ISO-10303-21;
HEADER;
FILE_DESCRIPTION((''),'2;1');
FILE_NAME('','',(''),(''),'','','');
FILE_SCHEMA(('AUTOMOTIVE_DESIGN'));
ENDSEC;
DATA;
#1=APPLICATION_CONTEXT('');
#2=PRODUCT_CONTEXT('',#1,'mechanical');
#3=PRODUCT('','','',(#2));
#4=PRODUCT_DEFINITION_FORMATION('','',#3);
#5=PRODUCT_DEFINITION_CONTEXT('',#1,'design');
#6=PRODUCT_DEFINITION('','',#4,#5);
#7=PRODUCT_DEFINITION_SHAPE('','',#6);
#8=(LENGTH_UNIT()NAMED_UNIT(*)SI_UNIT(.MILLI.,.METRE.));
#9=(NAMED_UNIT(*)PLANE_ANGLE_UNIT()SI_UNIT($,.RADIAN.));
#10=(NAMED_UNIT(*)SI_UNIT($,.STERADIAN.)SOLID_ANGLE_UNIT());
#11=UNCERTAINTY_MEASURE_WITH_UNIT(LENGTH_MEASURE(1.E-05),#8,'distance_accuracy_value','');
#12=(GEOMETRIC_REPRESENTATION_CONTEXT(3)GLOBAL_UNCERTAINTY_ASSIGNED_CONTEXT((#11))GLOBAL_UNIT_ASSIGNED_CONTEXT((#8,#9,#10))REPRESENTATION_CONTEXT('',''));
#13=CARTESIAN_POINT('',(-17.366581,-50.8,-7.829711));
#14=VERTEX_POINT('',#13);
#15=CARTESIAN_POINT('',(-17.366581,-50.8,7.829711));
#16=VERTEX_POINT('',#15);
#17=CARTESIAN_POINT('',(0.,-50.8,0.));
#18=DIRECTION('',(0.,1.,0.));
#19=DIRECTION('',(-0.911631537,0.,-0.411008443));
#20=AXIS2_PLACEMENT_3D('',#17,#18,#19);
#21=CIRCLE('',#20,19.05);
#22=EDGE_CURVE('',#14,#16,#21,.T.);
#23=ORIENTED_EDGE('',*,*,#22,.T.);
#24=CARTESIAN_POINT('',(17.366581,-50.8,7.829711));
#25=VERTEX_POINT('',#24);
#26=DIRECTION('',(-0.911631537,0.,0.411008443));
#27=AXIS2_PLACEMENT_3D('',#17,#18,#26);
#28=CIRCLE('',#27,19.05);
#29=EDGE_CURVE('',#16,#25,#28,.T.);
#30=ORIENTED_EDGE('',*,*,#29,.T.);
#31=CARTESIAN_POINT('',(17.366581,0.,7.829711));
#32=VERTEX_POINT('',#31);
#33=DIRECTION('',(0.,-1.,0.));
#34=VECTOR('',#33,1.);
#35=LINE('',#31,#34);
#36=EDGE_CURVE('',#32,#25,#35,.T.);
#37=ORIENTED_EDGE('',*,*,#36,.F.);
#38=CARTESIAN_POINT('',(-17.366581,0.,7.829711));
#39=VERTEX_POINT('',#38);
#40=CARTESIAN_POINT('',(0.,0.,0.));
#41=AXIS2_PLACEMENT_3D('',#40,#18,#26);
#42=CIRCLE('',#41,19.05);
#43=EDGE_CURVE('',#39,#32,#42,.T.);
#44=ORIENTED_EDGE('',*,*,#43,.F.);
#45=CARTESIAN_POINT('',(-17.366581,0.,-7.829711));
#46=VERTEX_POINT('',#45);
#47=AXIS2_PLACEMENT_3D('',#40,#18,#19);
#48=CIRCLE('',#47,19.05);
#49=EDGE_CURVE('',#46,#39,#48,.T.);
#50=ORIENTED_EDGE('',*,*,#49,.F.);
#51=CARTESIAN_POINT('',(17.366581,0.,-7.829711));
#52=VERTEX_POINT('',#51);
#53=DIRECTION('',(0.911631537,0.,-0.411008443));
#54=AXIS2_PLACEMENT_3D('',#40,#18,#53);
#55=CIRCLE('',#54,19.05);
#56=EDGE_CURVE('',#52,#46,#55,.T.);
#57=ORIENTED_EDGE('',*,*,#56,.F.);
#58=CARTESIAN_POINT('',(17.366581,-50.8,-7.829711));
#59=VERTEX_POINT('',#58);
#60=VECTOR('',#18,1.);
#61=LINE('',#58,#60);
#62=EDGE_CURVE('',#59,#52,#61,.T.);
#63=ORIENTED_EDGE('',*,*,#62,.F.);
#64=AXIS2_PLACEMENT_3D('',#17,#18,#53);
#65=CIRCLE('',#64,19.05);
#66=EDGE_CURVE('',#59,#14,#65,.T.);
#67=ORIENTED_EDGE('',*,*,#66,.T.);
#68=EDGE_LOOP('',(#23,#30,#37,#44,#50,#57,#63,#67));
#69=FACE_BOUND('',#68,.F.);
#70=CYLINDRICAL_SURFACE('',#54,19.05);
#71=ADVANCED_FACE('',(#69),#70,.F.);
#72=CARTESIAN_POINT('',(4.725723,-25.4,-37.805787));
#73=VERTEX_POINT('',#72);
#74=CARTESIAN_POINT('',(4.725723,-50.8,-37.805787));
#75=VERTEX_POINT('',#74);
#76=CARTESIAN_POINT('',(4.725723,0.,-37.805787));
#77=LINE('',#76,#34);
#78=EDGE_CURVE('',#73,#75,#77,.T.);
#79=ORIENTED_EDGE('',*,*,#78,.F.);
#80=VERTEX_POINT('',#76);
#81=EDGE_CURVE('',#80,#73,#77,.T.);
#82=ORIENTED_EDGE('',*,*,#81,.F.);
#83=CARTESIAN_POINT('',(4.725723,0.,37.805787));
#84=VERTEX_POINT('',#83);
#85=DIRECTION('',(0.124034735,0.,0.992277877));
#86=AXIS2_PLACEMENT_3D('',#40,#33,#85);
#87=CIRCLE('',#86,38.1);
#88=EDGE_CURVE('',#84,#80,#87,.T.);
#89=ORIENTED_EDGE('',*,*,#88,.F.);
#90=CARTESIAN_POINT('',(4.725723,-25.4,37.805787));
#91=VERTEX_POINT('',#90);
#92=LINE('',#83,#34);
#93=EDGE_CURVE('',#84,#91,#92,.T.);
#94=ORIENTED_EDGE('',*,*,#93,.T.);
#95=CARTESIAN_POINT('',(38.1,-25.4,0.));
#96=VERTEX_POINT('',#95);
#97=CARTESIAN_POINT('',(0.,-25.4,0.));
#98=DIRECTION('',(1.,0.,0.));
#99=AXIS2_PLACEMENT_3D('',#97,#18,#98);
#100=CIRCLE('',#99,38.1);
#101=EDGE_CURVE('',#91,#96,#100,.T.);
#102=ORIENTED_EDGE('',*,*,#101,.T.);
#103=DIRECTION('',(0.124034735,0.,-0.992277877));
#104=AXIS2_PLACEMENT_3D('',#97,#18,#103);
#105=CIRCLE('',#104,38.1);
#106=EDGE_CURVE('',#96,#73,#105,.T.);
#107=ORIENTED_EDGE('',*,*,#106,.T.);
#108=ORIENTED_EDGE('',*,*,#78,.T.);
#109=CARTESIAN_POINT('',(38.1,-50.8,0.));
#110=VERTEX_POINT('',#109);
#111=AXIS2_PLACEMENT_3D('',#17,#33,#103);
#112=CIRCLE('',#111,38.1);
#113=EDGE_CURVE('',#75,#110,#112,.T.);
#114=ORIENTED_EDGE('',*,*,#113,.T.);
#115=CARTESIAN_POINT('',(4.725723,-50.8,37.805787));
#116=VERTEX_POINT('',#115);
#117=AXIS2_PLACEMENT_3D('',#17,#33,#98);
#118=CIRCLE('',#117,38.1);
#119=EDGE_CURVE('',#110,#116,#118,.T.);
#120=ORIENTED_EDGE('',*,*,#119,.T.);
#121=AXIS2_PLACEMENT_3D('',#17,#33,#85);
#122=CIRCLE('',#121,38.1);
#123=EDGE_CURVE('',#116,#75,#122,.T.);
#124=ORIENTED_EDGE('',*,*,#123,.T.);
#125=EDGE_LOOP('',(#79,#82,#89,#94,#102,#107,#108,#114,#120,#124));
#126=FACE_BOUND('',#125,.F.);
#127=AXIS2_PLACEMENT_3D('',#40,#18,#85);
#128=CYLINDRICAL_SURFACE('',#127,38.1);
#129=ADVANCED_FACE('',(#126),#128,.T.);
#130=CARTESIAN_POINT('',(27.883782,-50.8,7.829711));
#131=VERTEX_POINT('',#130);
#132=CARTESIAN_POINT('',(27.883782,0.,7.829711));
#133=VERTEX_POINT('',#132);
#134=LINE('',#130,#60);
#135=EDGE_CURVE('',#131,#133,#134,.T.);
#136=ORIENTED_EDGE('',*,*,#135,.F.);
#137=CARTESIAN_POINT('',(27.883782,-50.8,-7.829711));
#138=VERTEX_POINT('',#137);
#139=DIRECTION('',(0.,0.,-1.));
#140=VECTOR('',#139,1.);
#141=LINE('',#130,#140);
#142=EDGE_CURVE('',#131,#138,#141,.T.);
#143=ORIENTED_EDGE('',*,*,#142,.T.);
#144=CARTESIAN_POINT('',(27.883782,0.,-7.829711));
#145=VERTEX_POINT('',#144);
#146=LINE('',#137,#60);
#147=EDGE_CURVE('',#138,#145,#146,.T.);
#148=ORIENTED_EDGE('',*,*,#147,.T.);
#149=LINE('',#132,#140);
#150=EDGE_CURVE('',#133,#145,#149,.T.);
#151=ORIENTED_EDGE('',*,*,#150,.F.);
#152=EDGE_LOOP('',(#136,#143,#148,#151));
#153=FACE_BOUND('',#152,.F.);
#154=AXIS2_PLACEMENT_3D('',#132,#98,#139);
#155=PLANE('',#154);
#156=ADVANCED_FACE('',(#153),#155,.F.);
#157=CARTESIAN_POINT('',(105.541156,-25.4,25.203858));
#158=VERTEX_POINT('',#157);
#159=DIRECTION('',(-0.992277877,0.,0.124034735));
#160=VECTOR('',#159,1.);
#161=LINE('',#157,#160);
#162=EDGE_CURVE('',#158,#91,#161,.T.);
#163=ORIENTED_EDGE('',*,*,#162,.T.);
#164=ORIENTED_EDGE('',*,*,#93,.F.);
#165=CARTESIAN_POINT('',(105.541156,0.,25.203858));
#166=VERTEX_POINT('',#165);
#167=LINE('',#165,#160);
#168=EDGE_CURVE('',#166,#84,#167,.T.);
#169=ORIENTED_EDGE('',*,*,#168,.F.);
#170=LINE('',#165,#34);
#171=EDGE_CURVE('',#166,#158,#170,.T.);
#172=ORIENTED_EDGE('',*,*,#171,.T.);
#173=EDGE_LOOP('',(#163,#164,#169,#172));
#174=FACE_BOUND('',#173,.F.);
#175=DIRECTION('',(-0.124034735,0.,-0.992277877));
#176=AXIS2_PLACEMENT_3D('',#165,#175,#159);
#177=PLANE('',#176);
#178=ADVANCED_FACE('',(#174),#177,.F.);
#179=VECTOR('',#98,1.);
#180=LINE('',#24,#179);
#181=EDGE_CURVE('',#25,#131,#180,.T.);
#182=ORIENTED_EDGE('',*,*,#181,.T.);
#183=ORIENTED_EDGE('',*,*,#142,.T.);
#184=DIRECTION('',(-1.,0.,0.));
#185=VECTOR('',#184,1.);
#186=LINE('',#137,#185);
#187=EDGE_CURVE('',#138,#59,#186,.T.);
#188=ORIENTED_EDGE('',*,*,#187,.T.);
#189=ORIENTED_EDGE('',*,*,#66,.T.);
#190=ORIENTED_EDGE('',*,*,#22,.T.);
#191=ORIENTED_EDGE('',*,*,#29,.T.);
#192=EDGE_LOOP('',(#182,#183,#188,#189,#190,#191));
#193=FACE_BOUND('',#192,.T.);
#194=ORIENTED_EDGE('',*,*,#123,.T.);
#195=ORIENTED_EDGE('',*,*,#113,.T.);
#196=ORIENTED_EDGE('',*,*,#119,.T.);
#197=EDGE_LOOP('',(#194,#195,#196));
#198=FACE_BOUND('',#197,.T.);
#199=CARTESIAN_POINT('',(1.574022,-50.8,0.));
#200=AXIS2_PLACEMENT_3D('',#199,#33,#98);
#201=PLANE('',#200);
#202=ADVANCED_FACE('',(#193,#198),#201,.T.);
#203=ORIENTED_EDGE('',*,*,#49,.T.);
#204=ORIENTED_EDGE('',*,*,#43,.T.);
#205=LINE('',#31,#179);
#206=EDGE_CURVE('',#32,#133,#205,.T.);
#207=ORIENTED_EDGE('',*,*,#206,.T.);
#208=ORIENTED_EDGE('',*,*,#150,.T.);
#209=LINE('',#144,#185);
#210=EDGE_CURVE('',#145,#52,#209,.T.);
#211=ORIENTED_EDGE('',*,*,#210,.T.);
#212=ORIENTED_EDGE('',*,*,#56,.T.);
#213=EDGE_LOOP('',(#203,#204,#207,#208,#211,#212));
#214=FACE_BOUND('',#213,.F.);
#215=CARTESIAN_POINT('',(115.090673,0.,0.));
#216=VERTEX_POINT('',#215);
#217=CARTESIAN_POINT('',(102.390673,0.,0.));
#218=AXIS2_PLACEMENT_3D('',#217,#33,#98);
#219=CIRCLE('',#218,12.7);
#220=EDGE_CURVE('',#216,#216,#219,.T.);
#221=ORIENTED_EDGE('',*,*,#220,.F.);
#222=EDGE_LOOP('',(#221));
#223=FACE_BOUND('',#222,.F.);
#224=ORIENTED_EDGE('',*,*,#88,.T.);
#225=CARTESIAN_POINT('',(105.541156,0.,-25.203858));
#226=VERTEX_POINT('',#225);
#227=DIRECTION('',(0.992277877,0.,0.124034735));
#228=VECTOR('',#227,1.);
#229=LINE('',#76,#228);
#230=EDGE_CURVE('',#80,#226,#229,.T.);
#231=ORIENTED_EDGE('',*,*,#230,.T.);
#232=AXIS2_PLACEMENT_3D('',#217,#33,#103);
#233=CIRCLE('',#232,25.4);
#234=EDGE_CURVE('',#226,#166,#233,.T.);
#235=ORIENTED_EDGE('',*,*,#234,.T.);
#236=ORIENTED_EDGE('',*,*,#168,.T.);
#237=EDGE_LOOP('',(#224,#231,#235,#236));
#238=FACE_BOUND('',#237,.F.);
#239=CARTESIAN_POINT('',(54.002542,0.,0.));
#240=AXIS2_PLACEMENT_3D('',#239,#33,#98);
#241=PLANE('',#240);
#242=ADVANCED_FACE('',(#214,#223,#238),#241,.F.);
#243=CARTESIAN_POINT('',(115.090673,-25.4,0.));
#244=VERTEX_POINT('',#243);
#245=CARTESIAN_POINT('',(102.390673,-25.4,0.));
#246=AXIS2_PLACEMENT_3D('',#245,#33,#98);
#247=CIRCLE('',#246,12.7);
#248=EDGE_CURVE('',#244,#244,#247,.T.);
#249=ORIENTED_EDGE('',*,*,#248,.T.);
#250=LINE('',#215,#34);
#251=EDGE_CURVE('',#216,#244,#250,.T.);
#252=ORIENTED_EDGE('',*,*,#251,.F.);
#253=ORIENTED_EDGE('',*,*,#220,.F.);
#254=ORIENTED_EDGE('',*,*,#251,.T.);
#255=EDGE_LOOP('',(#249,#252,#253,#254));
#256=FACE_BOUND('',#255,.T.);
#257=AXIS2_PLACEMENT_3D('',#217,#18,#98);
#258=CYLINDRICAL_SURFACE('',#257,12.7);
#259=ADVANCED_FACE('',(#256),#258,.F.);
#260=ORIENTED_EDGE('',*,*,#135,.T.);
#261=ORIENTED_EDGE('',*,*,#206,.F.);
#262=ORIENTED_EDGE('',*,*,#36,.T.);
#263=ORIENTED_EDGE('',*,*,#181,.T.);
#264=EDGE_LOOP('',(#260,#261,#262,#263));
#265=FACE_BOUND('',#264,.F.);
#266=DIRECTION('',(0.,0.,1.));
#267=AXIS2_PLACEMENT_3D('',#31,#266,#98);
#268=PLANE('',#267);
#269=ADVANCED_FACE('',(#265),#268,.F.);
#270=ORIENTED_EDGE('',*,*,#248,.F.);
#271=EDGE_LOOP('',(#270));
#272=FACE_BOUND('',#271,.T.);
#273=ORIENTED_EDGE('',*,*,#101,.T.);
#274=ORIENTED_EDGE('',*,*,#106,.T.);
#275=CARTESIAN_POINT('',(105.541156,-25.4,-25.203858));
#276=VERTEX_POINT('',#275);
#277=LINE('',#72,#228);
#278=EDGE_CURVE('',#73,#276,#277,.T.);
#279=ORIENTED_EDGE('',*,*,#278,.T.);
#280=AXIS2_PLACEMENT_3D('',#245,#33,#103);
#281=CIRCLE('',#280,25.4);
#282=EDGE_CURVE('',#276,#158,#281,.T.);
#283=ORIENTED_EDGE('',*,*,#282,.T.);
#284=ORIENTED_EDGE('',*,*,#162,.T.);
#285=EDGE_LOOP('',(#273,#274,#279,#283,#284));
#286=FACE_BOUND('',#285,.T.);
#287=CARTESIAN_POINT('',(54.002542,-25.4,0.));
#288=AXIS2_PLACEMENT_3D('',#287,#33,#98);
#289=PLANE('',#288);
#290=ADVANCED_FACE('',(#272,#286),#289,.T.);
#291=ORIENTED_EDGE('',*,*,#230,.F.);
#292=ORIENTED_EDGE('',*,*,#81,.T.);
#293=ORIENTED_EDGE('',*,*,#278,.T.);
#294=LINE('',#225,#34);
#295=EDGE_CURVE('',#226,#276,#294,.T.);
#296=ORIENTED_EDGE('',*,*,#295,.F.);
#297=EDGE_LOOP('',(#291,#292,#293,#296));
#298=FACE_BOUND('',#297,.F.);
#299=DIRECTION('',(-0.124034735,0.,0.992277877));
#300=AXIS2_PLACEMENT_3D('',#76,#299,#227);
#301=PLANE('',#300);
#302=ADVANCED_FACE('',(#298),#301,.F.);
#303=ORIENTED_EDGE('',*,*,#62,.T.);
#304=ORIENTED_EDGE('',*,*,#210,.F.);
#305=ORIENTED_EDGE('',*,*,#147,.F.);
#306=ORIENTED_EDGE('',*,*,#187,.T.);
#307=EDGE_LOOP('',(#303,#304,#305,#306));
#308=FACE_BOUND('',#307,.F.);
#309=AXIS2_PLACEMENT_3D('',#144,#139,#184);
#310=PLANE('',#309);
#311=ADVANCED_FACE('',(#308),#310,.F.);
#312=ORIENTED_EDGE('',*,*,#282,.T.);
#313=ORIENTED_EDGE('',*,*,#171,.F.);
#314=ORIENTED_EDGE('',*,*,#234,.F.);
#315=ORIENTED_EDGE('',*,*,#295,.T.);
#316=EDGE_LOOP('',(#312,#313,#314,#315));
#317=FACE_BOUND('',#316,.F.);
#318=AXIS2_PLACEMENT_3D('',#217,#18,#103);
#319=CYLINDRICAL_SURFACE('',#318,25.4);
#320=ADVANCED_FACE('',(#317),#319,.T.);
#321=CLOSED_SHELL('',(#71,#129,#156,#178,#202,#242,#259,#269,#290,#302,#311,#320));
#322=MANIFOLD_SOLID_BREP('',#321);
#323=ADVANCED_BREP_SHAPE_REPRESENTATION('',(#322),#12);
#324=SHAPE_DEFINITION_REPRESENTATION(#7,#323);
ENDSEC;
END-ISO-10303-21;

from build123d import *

# Parameters (mm, degrees)
F0_R     = 12.7
F1_DEPTH = 25.4
F2_DEPTH = 50.8


# Not quite as in the source:
# - a feature names something its author has since deleted; it is built from what else it names


with BuildPart() as f1:
    # F0 (on Front) → F1 (new body)
    with BuildSketch(Plane.XZ):
        with BuildLine():
            ThreePointArc((4.7257233878, 37.8057871028), (28.5627384986, 25.2146776593), (38.1, 0))
            ThreePointArc((38.1, 0), (28.5627384986, -25.2146776593), (4.7257233878, -37.8057871028))
            Line((4.7257233878, -37.8057871028), (105.541155662, -25.2038580685))
            ThreePointArc((105.541155662, -25.2038580685), (76.9906734034, 0), (105.541155662, 25.2038580685))
            Line((105.541155662, 25.2038580685), (4.7257233878, 37.8057871028))
        make_face()
        with BuildLine():
            ThreePointArc((127.7906734034, 0), (121.4324990691, 16.8097851062), (105.541155662, 25.2038580685))
            ThreePointArc((105.541155662, 25.2038580685), (76.9906734034, 0), (105.541155662, -25.2038580685))
            ThreePointArc((105.541155662, -25.2038580685), (121.4324990691, -16.8097851062), (127.7906734034, 0))
        make_face()
        with Locations((102.3906734034, 0)):
            Circle(F0_R, mode=Mode.SUBTRACT)
        with BuildLine():
            ThreePointArc((4.7257233878, -37.8057871028), (28.5627384986, -25.2146776593), (38.1, 0))
            ThreePointArc((38.1, 0), (28.5627384986, 25.2146776593), (4.7257233878, 37.8057871028))
            ThreePointArc((4.7257233878, 37.8057871028), (-38.1, 0), (4.7257233878, -37.8057871028))
        make_face()
        with BuildLine():
            ThreePointArc((-17.3665807845, 7.8297108412), (0, 19.05), (17.3665807845, 7.8297108412))
            Line((17.3665807845, 7.8297108412), (27.8837817341, 7.8297108412))
            Line((27.8837817341, 7.8297108412), (27.8837817341, -7.8297108412))
            Line((27.8837817341, -7.8297108412), (17.3665807845, -7.8297108412))
            ThreePointArc((17.3665807845, -7.8297108412), (0, -19.05), (-17.3665807845, -7.8297108412))
            Line((-17.3665807845, -7.8297108412), (-22.9162182659, -7.8297108412))
            Line((-22.9162182659, -7.8297108412), (-22.9162182659, 0))
            Line((-22.9162182659, 0), (-22.9162182659, 7.8297108412))
            Line((-22.9162182659, 7.8297108412), (-17.3665807845, 7.8297108412))
        make_face(mode=Mode.SUBTRACT)
        with BuildLine():
            ThreePointArc((-17.3665807845, -7.8297108412), (-19.05, 0), (-17.3665807845, 7.8297108412))
            Line((-17.3665807845, 7.8297108412), (-22.9162182659, 7.8297108412))
            Line((-22.9162182659, 7.8297108412), (-22.9162182659, 0))
            Line((-22.9162182659, 0), (-22.9162182659, -7.8297108412))
            Line((-22.9162182659, -7.8297108412), (-17.3665807845, -7.8297108412))
        make_face()
    extrude(amount=F1_DEPTH)

    # F0 (on Front) → F2 (join)
    with BuildSketch(Plane.XZ):
        with BuildLine():
            ThreePointArc((4.7257233878, -37.8057871028), (28.5627384986, -25.2146776593), (38.1, 0))
            ThreePointArc((38.1, 0), (28.5627384986, 25.2146776593), (4.7257233878, 37.8057871028))
            ThreePointArc((4.7257233878, 37.8057871028), (-38.1, 0), (4.7257233878, -37.8057871028))
        make_face()
        with BuildLine():
            ThreePointArc((-17.3665807845, 7.8297108412), (0, 19.05), (17.3665807845, 7.8297108412))
            Line((17.3665807845, 7.8297108412), (27.8837817341, 7.8297108412))
            Line((27.8837817341, 7.8297108412), (27.8837817341, -7.8297108412))
            Line((27.8837817341, -7.8297108412), (17.3665807845, -7.8297108412))
            ThreePointArc((17.3665807845, -7.8297108412), (0, -19.05), (-17.3665807845, -7.8297108412))
            Line((-17.3665807845, -7.8297108412), (-22.9162182659, -7.8297108412))
            Line((-22.9162182659, -7.8297108412), (-22.9162182659, 0))
            Line((-22.9162182659, 0), (-22.9162182659, 7.8297108412))
            Line((-22.9162182659, 7.8297108412), (-17.3665807845, 7.8297108412))
        make_face(mode=Mode.SUBTRACT)
        with BuildLine():
            ThreePointArc((-17.3665807845, -7.8297108412), (-19.05, 0), (-17.3665807845, 7.8297108412))
            Line((-17.3665807845, 7.8297108412), (-22.9162182659, 7.8297108412))
            Line((-22.9162182659, 7.8297108412), (-22.9162182659, 0))
            Line((-22.9162182659, 0), (-22.9162182659, -7.8297108412))
            Line((-22.9162182659, -7.8297108412), (-17.3665807845, -7.8297108412))
        make_face()
    extrude(amount=F2_DEPTH)


solid = f1.part
